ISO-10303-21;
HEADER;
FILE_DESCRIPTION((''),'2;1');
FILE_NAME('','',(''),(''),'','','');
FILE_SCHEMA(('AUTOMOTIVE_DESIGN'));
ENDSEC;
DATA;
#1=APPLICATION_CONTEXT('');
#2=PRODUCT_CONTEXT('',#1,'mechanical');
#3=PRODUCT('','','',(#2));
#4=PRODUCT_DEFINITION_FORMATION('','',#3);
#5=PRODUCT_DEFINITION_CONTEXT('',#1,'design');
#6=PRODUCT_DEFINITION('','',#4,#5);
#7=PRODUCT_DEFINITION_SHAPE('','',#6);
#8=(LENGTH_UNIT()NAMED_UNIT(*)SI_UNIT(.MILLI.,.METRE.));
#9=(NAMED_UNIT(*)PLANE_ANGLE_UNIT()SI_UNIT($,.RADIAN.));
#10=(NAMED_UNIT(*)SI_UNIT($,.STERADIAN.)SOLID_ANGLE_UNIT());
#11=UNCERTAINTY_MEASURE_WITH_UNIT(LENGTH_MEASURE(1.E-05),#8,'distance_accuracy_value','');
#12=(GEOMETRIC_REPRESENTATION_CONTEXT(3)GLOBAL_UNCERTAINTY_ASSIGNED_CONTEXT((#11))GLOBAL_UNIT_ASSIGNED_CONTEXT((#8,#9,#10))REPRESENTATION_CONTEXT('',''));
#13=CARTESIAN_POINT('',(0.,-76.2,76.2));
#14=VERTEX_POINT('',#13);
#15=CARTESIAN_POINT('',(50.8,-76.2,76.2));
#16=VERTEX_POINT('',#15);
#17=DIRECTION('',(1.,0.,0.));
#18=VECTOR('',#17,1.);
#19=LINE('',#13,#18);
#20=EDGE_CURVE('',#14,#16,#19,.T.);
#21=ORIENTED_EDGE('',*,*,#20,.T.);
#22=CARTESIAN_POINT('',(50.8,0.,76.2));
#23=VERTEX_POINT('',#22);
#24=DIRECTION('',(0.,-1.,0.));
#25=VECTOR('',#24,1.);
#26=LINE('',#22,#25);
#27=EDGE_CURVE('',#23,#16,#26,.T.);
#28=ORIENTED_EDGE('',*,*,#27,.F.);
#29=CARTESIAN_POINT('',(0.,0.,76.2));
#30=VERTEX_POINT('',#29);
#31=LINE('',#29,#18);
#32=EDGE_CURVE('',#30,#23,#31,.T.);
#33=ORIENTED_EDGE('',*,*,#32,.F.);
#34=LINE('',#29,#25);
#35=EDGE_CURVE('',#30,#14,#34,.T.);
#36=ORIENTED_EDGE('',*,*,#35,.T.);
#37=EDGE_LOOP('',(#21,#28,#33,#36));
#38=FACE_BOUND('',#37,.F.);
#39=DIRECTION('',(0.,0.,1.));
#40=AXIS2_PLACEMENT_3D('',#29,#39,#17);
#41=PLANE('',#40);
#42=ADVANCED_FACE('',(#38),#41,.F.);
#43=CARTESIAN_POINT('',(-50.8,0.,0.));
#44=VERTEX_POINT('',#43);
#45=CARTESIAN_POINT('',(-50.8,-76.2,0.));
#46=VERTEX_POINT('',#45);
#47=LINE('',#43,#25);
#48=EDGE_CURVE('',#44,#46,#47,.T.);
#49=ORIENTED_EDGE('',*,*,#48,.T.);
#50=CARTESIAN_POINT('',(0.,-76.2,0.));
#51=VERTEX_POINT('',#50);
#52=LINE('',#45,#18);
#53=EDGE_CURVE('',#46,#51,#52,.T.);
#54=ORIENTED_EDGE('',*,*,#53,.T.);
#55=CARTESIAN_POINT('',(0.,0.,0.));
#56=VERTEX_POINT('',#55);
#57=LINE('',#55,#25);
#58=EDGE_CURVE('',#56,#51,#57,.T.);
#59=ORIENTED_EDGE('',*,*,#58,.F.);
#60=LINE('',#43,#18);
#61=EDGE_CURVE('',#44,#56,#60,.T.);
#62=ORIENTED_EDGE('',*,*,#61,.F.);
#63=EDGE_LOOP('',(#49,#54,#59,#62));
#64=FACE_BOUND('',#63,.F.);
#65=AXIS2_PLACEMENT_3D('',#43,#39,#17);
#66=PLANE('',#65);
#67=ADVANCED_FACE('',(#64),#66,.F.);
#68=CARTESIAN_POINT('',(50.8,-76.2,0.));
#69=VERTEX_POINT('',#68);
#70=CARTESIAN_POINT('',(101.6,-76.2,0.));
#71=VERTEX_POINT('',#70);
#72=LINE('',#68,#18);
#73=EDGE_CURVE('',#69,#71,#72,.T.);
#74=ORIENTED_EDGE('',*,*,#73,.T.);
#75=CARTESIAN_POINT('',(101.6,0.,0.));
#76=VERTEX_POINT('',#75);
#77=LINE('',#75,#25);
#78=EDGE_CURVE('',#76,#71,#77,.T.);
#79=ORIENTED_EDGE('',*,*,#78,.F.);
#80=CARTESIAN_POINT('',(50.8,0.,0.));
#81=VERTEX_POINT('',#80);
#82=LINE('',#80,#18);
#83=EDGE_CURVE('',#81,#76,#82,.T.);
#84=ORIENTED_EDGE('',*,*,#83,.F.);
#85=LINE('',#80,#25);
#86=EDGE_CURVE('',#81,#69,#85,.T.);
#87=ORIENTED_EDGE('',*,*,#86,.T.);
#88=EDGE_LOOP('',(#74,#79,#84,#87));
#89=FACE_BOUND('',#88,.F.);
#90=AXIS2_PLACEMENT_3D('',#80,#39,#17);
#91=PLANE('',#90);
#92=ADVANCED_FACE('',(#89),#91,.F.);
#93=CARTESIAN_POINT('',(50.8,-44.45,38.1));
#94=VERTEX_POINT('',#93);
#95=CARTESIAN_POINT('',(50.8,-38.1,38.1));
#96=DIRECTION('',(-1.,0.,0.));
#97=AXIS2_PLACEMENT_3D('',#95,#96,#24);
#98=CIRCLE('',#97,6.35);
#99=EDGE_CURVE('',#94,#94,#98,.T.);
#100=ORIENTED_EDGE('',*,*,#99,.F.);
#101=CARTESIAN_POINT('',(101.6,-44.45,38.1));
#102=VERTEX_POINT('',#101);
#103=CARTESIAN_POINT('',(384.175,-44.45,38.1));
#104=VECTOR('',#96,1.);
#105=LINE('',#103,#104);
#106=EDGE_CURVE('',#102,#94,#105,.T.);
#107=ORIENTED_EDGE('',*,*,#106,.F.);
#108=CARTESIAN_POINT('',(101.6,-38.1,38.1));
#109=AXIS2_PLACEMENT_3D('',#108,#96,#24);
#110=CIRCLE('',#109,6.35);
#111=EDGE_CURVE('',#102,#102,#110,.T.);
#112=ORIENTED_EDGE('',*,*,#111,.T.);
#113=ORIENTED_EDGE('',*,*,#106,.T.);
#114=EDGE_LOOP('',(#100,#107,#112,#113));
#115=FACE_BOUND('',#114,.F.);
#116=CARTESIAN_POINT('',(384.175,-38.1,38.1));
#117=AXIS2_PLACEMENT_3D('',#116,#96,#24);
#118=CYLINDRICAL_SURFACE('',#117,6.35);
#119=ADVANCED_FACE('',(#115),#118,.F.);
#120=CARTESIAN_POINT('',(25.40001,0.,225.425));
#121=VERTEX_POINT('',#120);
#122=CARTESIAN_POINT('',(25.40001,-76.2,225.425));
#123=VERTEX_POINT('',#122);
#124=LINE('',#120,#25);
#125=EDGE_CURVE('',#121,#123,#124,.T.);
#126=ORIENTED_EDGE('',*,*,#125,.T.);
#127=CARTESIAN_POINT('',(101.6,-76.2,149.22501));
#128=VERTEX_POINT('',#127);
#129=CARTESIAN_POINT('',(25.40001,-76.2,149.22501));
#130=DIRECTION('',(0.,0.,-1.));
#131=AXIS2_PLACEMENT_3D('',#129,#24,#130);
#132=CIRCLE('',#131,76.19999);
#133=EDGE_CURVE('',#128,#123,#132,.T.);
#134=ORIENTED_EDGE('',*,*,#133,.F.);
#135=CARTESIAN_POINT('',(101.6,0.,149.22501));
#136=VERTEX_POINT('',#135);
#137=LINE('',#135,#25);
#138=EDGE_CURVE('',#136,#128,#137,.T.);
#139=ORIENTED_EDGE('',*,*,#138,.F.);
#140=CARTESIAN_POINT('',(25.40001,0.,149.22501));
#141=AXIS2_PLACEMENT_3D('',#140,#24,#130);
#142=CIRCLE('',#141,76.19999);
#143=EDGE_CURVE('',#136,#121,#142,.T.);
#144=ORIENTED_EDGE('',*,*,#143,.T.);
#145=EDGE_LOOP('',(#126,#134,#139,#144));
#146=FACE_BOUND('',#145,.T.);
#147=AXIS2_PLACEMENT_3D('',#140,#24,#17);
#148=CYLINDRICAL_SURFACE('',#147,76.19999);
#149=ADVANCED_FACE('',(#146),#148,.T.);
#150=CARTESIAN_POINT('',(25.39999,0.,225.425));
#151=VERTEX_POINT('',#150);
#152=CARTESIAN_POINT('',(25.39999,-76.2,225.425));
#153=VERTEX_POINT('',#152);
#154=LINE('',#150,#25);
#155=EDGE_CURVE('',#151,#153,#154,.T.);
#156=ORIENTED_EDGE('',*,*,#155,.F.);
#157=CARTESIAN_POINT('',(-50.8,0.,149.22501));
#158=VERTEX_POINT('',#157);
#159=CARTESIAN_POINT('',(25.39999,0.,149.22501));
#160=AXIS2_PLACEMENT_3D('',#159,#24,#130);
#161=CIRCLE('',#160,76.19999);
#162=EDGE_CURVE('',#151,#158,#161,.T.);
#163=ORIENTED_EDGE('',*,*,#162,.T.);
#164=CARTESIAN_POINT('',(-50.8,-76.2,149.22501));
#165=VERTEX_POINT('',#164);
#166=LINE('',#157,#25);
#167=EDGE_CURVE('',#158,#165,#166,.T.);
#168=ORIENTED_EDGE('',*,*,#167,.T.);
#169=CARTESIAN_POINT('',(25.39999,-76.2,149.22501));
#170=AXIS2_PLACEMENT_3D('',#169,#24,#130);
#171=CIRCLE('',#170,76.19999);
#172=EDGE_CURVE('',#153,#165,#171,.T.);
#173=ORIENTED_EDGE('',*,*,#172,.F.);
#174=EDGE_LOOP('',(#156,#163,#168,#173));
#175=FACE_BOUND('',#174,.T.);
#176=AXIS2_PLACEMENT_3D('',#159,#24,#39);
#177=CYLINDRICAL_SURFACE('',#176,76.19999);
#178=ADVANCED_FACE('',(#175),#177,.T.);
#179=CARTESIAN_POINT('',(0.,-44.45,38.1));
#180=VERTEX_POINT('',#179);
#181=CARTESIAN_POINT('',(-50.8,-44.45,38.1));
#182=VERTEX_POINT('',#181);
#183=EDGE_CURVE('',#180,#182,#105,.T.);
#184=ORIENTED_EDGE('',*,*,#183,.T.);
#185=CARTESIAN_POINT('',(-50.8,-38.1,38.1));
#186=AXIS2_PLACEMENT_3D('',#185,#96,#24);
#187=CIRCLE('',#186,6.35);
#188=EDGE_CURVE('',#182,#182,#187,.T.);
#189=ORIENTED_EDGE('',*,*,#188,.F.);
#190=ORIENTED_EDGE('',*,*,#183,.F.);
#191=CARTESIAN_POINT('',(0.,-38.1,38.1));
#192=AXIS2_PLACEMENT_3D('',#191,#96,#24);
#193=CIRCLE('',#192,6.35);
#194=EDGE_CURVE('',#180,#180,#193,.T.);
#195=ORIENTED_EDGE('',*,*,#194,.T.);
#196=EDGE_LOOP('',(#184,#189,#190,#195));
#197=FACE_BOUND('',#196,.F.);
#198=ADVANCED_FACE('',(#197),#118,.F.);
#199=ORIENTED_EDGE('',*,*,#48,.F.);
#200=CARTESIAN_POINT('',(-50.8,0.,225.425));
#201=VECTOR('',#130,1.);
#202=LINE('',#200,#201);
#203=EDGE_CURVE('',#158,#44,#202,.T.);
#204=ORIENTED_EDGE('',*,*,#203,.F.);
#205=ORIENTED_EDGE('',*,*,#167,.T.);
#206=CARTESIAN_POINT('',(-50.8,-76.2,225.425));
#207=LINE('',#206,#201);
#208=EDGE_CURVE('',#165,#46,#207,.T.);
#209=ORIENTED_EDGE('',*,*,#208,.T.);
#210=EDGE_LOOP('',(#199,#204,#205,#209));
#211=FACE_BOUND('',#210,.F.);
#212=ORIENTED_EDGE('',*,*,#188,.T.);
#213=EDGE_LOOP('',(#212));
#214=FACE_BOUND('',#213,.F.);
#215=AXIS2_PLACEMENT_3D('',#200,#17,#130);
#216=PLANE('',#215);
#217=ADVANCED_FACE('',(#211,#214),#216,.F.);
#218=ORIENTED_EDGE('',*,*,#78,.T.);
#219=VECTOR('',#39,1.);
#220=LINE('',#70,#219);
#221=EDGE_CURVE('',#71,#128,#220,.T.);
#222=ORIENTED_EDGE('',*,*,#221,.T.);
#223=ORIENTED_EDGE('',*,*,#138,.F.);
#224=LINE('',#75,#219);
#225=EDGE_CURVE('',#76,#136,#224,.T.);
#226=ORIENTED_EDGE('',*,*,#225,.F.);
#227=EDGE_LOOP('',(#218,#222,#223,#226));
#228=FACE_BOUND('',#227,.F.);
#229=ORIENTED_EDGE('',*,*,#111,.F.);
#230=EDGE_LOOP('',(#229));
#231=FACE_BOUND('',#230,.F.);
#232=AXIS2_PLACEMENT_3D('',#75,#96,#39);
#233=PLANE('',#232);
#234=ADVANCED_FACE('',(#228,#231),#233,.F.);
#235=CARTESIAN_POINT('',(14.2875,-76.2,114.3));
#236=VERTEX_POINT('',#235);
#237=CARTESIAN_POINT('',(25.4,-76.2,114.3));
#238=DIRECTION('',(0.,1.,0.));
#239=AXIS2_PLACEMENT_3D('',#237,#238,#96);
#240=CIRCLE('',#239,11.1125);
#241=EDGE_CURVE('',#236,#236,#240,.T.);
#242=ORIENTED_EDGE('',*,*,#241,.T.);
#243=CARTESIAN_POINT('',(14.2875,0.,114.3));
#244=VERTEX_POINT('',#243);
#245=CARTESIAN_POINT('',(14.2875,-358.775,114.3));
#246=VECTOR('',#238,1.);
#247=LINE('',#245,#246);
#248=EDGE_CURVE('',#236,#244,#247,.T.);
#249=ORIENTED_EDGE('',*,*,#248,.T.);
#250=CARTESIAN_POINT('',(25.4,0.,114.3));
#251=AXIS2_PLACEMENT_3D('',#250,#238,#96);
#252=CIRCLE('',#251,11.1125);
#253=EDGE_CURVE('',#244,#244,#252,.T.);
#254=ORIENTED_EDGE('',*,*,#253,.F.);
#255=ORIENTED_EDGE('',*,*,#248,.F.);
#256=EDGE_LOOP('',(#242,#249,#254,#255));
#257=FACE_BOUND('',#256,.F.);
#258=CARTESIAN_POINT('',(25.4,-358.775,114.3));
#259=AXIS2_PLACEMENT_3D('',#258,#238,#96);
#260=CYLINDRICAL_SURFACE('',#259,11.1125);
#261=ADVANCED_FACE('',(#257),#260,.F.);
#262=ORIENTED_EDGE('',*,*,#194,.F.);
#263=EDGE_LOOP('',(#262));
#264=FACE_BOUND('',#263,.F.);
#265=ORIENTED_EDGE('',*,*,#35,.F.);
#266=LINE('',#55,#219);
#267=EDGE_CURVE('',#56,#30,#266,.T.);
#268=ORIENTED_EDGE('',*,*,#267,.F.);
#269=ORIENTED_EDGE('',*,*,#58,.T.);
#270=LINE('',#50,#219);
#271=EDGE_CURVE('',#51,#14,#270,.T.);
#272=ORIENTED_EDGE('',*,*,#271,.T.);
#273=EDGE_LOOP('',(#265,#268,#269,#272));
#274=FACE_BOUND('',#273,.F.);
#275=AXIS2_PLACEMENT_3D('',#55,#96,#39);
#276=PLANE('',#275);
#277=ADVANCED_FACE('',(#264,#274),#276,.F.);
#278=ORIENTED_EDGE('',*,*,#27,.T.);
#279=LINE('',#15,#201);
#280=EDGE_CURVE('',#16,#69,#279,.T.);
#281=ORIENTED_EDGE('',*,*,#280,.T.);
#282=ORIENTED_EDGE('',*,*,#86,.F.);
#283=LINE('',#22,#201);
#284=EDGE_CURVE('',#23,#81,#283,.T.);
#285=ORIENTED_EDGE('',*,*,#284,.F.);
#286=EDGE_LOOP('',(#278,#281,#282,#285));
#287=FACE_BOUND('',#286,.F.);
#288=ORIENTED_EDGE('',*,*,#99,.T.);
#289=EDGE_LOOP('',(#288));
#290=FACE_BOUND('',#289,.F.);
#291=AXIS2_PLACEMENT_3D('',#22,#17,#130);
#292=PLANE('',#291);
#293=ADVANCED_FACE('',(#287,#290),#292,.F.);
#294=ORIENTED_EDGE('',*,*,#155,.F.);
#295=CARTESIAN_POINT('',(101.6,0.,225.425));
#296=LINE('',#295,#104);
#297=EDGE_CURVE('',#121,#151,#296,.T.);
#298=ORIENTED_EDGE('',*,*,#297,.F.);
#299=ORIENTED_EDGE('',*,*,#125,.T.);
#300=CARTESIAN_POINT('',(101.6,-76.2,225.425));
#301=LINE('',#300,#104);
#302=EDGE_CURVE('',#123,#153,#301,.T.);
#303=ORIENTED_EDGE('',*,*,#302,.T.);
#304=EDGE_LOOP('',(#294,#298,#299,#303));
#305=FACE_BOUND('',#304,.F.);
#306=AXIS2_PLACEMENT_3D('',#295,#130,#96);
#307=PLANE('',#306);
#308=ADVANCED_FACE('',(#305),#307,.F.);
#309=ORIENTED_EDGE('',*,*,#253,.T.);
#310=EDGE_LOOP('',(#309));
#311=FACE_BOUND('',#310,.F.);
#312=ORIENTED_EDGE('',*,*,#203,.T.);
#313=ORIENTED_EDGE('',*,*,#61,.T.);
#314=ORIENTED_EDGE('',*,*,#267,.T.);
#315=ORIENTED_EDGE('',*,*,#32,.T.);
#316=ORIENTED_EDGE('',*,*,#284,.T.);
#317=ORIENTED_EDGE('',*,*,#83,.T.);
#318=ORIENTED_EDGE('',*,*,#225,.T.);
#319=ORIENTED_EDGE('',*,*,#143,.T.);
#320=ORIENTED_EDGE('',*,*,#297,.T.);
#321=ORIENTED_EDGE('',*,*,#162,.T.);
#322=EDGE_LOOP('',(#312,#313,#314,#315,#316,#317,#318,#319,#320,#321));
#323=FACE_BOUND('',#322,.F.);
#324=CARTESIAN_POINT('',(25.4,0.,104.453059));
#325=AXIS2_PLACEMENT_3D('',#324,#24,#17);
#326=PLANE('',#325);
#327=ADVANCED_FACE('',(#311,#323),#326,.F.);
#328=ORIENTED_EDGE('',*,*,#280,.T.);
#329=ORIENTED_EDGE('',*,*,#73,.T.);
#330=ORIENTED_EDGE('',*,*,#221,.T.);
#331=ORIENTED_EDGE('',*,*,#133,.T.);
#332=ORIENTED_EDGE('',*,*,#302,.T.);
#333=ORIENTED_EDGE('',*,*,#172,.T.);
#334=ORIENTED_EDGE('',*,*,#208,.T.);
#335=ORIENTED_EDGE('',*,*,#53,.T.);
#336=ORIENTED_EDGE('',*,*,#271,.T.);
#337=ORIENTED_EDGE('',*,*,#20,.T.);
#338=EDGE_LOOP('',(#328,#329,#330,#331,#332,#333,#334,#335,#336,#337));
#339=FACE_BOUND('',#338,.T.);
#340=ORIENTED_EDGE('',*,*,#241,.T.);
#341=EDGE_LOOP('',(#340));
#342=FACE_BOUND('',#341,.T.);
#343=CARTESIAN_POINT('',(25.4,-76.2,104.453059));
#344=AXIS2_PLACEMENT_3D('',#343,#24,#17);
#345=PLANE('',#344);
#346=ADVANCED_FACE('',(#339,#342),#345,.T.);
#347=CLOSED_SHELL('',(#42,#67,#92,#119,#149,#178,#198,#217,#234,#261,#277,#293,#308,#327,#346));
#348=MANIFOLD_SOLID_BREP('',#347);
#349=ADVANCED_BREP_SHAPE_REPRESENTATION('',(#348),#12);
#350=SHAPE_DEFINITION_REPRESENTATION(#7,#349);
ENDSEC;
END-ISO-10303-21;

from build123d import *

# Parameters (mm, degrees)
F1_DEPTH = 76.2
F2_R     = 76.19999
F4_D     = 22.225
F6_D     = 12.7


# Not quite as in the source:
# - a fillet or chamfer is up to 0.001 mm smaller than in the source, because OpenCascade refuses the exact size


with BuildPart() as f1:
    # F0 (on Front) → F1 (new body)
    with BuildSketch(Plane.XZ):
        Polygon((-50.8, 0), (0, 0), (0, 76.2), (50.8, 76.2), (50.8, 0), (101.6, 0), (101.6, 225.425), (-50.8, 225.425), align=None)
    extrude(amount=F1_DEPTH)

    # F2 (radius 76.2 in the source; OpenCascade refuses exactly that, so slightly less here)
    f2_edges = [f1.edges().sort_by_distance(p)[0] for p in [
        (101.6, -38.1, 225.425),
        (-50.8, -38.1, 225.425),
    ]]
    fillet(f2_edges, radius=F2_R)

    # F4 (through all)
    with Locations(Plane.XZ.offset(76.2)):
        with Locations((25.4, 114.3)):
            Hole(F4_D / 2)

    # F6 (through all)
    with Locations(Plane.YZ.offset(101.6)):
        with Locations((-38.1, 38.1)):
            Hole(F6_D / 2)


solid = f1.part
